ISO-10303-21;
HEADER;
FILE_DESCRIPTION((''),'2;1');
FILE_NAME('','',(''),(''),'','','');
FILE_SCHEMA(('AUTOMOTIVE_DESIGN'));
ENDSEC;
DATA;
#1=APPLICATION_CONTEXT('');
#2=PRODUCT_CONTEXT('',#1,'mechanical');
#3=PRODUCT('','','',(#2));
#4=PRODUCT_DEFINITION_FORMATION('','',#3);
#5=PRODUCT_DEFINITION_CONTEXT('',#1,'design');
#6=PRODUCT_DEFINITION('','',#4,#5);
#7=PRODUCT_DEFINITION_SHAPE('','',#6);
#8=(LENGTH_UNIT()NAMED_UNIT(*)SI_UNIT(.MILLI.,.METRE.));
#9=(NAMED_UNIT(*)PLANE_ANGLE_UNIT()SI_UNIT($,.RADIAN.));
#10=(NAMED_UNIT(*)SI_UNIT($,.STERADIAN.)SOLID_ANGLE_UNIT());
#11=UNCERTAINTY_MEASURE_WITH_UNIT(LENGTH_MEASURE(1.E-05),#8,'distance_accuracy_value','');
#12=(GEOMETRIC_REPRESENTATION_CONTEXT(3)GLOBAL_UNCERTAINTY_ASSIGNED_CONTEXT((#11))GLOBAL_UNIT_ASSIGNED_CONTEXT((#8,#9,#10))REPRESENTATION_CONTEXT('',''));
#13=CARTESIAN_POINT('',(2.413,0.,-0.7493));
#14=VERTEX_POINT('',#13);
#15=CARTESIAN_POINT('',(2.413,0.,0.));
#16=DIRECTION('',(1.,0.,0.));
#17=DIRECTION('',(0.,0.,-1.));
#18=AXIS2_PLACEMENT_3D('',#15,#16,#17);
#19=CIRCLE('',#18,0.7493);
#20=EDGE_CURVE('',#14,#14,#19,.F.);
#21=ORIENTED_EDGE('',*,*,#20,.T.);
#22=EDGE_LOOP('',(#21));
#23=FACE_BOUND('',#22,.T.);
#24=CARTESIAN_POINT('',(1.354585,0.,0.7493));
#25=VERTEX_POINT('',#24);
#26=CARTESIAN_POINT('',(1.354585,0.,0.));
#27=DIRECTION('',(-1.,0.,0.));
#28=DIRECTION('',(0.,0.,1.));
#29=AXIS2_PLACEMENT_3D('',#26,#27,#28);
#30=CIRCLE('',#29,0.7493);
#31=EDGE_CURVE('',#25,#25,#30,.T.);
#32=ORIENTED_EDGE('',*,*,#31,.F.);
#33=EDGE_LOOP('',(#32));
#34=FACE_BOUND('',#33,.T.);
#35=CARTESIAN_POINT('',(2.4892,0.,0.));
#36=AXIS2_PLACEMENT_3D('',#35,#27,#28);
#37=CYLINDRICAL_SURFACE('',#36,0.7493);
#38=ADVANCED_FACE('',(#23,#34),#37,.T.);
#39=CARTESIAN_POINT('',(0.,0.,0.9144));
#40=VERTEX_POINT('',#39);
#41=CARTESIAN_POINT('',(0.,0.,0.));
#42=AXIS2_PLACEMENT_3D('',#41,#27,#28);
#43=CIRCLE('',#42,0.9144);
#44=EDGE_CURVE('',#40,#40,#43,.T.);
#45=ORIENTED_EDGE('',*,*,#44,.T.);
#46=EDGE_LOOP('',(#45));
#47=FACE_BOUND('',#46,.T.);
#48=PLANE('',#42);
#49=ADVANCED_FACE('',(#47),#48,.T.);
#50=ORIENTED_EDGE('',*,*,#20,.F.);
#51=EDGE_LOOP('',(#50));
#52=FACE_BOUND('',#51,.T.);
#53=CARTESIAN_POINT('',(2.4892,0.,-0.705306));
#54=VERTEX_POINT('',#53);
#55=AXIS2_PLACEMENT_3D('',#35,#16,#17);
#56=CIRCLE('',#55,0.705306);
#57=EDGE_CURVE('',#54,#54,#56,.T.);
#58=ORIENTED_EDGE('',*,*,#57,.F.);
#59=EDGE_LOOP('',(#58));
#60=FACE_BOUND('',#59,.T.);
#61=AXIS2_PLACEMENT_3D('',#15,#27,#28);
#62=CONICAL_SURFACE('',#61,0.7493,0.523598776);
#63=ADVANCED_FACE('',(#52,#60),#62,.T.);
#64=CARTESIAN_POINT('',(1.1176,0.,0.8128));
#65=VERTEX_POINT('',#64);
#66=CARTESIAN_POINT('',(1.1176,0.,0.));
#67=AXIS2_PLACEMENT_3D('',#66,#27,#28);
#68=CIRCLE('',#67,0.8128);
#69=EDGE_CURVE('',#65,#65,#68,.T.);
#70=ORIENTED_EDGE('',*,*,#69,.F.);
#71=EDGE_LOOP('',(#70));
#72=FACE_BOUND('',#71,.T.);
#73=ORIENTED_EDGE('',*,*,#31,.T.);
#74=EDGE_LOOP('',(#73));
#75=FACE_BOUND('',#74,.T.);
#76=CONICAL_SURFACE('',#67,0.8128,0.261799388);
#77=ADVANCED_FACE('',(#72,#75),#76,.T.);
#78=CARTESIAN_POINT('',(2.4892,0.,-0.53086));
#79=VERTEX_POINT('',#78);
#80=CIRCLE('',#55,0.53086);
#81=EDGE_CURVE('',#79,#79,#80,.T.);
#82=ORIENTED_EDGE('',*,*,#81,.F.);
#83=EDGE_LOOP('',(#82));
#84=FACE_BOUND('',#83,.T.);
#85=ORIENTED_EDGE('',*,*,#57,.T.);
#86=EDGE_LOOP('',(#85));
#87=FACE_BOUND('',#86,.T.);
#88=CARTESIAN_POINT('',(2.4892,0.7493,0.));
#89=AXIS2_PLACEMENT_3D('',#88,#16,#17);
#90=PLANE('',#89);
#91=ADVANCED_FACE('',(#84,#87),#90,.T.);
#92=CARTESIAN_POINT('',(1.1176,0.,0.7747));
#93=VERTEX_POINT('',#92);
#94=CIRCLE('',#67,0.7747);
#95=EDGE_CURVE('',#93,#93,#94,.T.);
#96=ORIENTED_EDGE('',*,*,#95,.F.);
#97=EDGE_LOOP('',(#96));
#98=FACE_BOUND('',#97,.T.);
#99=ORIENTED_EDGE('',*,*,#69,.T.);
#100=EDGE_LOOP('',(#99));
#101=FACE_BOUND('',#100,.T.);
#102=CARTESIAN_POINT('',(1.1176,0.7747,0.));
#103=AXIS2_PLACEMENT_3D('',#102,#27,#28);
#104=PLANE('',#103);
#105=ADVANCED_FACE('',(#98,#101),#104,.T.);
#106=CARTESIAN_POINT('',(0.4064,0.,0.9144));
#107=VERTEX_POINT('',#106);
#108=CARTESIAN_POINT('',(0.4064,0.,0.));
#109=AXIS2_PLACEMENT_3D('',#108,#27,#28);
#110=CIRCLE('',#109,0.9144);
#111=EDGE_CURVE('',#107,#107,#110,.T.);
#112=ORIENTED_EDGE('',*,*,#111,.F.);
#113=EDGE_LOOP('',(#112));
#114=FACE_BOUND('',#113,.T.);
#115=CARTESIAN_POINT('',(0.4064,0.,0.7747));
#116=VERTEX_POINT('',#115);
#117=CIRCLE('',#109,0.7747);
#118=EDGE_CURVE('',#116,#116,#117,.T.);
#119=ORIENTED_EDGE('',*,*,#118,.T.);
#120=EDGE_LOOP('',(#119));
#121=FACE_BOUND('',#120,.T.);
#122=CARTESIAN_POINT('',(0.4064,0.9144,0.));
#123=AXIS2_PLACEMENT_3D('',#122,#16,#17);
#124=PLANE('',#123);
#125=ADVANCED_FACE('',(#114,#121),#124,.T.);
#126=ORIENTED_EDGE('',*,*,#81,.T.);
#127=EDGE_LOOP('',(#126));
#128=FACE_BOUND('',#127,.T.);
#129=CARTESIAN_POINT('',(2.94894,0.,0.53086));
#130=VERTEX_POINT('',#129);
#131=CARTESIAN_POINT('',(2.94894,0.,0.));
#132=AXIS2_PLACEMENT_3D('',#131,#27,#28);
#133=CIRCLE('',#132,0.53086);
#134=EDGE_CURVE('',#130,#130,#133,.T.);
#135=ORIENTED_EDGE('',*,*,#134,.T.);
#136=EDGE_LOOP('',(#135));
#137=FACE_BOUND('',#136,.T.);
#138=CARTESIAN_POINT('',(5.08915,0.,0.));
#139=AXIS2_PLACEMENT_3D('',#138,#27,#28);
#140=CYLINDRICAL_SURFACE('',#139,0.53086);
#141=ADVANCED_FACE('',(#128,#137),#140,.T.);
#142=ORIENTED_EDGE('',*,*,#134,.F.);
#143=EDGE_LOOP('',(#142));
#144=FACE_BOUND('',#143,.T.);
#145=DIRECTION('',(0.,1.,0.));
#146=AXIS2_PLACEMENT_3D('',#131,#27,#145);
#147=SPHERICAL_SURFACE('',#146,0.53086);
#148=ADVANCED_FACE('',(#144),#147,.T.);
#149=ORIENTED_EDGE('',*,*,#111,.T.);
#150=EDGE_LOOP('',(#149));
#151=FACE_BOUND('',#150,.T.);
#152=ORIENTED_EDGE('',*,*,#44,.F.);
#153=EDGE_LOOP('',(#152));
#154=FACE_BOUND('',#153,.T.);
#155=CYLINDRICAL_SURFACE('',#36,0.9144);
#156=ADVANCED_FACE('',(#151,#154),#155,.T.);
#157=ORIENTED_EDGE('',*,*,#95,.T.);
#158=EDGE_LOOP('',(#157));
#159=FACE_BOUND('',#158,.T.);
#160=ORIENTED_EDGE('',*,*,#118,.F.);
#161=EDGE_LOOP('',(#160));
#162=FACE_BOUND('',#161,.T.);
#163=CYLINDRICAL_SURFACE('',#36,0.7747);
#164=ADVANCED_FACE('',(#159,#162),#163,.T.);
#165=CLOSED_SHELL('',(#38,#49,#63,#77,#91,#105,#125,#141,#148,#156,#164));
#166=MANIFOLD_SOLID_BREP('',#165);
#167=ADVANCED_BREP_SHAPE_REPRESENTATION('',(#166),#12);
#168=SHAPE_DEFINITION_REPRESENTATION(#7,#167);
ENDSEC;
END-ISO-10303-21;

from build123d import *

# Parameters (mm, degrees)
CHAMFER1_SIZE  = 0.043994091
CHAMFER1_SIZE2 = 0.0762


# Read off the part's stored shape, not the designer's step: Boss-Extrude1
with BuildPart() as part:
    # Sketch1 → Revolve1 (revolve)
    with BuildSketch(Plane(origin=(0, 0, 0), x_dir=(-1, 0, 0), z_dir=(0, 0, -1)), mode=Mode.PRIVATE) as revolve1_sk:
        Polygon((-2.4892, 0.7493), (-2.4892, 0), (0, 0), (0, 0.9144), (-0.4064, 0.9144), (-0.4064, 0.7747), (-1.1176, 0.7747), (-1.1176, 0.8128), (-1.354585226, 0.7493), align=None)
    revolve(revolve1_sk.sketch.rotate(Axis((2.4892, 0, 0), (-1, 0, 0)), 270), axis=Axis((2.4892, 0, 0), (-1, 0, 0)))

    # Boss-Extrude1 outline → Boss-Extrude1 (revolve)
    with BuildSketch(Plane.YX):
        with BuildLine():
            Line((0.53086, 2.4892), (0.53086, 2.948939999))
            ThreePointArc((0.53086, 2.948939999), (0.375374706, 3.324314706), (0, 3.4798))
            Line((0, 3.4798), (0, 2.4892))
            Line((0, 2.4892), (0.53086, 2.4892))
        make_face()
    revolve(axis=Axis((0, 0, 0), (1, 0, 0)))

    # Chamfer1
    chamfer1_edges = [part.edges().sort_by_distance(p)[0] for p in [
        (2.4892, 0, -0.7493),
    ]]
    chamfer1_side = [part.faces().sort_by_distance(p)[0] for p in [
        (2.4892, 0, -0.728106596),
    ]]
    chamfer(chamfer1_edges, length=CHAMFER1_SIZE, length2=CHAMFER1_SIZE2, reference=chamfer1_side[0])


solid = part.part
